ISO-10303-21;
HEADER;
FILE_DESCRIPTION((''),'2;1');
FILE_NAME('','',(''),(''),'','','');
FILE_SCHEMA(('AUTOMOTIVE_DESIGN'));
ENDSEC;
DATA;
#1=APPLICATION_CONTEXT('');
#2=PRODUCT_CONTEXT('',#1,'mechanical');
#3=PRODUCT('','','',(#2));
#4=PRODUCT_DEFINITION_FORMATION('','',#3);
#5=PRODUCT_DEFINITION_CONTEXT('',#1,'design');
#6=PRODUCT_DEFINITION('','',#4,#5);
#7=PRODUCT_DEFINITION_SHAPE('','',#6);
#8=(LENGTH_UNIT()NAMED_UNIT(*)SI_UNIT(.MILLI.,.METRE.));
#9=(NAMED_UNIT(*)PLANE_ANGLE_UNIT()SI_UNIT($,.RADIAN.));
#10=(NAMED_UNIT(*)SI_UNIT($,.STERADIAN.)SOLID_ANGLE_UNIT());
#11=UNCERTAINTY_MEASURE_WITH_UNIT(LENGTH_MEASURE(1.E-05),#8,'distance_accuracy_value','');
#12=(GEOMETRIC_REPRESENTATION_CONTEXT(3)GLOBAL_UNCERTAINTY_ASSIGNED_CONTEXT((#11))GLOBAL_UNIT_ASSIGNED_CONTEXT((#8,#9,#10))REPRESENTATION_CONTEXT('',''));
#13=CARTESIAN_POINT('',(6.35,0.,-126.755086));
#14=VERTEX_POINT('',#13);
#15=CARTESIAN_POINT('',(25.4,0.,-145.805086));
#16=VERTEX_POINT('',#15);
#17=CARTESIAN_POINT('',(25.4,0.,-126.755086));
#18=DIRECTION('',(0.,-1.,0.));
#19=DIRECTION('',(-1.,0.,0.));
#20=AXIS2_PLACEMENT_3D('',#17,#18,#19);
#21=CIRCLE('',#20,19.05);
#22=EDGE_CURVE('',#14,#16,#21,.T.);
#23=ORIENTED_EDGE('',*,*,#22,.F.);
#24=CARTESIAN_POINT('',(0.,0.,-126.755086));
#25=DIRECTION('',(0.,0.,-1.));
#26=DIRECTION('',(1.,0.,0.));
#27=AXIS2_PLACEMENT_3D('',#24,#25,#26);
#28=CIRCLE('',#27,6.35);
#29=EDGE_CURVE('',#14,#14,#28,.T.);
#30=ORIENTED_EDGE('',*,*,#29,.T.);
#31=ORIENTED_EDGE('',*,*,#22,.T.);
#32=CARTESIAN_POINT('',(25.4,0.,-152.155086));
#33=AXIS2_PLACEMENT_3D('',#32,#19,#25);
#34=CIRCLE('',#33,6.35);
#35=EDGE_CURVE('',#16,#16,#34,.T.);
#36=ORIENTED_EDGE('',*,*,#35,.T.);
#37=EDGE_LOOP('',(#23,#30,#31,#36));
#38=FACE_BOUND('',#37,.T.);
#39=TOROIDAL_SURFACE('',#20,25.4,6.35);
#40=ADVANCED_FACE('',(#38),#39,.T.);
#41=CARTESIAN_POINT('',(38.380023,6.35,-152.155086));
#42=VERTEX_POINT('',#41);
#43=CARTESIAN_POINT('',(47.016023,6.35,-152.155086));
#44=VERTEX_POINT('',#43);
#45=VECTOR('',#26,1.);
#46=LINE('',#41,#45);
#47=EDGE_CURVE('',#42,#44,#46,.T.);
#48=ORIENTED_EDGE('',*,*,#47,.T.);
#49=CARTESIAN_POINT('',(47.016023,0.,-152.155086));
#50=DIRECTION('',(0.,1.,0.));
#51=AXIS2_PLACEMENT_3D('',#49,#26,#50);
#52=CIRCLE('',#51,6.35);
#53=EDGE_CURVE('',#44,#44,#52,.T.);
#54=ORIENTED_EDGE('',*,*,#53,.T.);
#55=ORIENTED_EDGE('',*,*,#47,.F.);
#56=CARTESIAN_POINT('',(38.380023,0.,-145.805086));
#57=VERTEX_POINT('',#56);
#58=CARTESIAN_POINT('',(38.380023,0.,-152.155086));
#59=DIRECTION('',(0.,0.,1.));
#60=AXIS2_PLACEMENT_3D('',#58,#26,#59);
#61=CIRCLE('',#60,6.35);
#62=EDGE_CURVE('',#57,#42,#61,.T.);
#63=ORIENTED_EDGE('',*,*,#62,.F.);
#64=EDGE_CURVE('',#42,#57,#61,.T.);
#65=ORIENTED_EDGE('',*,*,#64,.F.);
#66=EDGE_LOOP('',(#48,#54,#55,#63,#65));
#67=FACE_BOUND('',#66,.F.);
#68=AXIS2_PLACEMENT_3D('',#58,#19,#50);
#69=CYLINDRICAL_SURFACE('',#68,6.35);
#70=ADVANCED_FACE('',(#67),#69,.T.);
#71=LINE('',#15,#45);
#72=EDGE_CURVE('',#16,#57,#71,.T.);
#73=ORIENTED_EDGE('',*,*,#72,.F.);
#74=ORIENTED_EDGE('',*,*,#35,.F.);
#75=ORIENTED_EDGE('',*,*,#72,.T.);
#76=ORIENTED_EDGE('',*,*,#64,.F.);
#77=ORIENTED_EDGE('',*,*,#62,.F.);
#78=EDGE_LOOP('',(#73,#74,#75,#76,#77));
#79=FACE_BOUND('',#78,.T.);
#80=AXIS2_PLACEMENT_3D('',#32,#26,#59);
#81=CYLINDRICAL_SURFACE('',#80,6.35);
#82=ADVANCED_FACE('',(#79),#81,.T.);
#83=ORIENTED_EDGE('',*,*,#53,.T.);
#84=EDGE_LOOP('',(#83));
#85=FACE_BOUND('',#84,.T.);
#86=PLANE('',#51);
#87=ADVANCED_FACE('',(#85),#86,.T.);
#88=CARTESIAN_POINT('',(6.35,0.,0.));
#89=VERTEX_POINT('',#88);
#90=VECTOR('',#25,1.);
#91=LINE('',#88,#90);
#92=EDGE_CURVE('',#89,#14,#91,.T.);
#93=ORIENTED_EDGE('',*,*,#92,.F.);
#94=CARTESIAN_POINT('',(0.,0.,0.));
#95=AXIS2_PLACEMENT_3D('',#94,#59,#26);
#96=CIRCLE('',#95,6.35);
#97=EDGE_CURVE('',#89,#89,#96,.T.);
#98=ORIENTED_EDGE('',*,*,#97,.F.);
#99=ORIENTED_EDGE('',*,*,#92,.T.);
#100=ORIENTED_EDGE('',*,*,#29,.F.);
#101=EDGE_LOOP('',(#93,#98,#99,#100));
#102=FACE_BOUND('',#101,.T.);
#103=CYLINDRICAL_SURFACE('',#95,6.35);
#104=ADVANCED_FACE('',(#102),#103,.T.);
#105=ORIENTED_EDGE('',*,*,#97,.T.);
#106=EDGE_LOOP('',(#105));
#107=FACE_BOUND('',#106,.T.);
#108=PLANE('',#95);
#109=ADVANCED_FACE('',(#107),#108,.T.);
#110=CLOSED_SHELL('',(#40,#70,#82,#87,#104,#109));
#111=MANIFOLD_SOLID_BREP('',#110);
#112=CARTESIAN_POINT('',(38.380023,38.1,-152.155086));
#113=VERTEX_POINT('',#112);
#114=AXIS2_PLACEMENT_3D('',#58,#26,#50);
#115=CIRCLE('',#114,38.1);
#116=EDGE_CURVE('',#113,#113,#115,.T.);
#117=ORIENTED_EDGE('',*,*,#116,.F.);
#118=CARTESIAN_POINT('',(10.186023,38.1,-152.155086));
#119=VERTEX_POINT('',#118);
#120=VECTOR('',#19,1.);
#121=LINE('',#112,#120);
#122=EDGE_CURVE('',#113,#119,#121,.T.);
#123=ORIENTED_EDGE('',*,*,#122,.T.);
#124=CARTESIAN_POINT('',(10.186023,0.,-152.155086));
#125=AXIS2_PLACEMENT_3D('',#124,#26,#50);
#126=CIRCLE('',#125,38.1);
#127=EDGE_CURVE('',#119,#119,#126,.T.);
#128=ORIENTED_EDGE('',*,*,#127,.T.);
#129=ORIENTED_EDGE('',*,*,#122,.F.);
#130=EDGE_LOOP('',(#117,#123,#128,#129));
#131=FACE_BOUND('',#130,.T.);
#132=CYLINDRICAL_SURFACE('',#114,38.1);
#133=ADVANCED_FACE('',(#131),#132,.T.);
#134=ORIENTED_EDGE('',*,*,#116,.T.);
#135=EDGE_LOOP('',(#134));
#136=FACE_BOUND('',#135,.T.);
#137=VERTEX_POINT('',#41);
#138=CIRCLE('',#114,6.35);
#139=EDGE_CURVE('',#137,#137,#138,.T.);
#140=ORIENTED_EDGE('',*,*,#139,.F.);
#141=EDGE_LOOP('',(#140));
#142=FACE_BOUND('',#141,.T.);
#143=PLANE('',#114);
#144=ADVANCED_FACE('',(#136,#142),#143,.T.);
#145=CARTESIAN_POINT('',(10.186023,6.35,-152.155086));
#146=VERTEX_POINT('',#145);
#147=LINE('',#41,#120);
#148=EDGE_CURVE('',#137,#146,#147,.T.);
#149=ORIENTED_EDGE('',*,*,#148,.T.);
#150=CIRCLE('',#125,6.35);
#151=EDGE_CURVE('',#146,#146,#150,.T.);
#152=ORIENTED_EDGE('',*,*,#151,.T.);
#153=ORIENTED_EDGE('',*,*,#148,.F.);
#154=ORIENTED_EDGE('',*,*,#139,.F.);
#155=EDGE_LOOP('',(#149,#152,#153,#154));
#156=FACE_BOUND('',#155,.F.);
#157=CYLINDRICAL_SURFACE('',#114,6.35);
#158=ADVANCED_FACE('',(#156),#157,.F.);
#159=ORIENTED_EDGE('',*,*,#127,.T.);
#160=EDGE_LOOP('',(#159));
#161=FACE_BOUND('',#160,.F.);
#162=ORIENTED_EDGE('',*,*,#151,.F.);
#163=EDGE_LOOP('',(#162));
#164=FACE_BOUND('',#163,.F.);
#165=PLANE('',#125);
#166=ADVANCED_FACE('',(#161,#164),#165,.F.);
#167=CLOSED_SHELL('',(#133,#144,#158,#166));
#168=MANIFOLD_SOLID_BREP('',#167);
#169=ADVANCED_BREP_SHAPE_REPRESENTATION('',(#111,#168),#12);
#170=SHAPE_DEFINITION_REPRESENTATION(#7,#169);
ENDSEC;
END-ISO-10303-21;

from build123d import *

# Parameters (mm, degrees)
F0_R      = 6.35
F1_DEPTH  = 101.6
F1_FACE_R = 6.35
F4_R      = 38.1
F4_R_2    = 6.35
F5_DEPTH  = 28.194
F6_R      = 6.35
F7_DEPTH  = 8.636


with BuildPart() as f1:
    # F0 (on Top) → F1 (new body)
    with BuildSketch(Plane.XY):
        Circle(F0_R)
    extrude(amount=-F1_DEPTH)

    # F3: sweep along a path in F2
    with BuildLine(Plane.XZ) as f3_path:
        Line((0, -100.055642426), (0, -126.7550863981))
        ThreePointArc((0, -126.7550863981), (7.4394877579, -144.7155986403), (25.4, -152.1550863981))
        Line((25.4, -152.1550863981), (38.380023092, -152.1550863981))
    # F1_face (on face) → F3 (sweep)
    with BuildSketch(Plane(origin=(0, 0, -101.6), x_dir=(1, 0, 0), z_dir=(0, 0, -1))):
        Circle(F1_FACE_R)
    sweep(path=f3_path.line)

    # F6 (on face) → F7 (join)
    with BuildSketch(Plane.YZ.offset(38.380023092)):
        with Locations((0, -152.1550863981)):
            Circle(F6_R)
    extrude(amount=F7_DEPTH)


with BuildPart() as f5:
    # F4 (on face) → F5 (new body)
    with BuildSketch(Plane.YZ.offset(38.380023092)):
        with Locations((0, -152.1550863981)):
            Circle(F4_R)
        with Locations((0, -152.1550863981)):
            Circle(F4_R_2, mode=Mode.SUBTRACT)
    extrude(amount=-F5_DEPTH)


solid = Compound([f1.part, f5.part])
